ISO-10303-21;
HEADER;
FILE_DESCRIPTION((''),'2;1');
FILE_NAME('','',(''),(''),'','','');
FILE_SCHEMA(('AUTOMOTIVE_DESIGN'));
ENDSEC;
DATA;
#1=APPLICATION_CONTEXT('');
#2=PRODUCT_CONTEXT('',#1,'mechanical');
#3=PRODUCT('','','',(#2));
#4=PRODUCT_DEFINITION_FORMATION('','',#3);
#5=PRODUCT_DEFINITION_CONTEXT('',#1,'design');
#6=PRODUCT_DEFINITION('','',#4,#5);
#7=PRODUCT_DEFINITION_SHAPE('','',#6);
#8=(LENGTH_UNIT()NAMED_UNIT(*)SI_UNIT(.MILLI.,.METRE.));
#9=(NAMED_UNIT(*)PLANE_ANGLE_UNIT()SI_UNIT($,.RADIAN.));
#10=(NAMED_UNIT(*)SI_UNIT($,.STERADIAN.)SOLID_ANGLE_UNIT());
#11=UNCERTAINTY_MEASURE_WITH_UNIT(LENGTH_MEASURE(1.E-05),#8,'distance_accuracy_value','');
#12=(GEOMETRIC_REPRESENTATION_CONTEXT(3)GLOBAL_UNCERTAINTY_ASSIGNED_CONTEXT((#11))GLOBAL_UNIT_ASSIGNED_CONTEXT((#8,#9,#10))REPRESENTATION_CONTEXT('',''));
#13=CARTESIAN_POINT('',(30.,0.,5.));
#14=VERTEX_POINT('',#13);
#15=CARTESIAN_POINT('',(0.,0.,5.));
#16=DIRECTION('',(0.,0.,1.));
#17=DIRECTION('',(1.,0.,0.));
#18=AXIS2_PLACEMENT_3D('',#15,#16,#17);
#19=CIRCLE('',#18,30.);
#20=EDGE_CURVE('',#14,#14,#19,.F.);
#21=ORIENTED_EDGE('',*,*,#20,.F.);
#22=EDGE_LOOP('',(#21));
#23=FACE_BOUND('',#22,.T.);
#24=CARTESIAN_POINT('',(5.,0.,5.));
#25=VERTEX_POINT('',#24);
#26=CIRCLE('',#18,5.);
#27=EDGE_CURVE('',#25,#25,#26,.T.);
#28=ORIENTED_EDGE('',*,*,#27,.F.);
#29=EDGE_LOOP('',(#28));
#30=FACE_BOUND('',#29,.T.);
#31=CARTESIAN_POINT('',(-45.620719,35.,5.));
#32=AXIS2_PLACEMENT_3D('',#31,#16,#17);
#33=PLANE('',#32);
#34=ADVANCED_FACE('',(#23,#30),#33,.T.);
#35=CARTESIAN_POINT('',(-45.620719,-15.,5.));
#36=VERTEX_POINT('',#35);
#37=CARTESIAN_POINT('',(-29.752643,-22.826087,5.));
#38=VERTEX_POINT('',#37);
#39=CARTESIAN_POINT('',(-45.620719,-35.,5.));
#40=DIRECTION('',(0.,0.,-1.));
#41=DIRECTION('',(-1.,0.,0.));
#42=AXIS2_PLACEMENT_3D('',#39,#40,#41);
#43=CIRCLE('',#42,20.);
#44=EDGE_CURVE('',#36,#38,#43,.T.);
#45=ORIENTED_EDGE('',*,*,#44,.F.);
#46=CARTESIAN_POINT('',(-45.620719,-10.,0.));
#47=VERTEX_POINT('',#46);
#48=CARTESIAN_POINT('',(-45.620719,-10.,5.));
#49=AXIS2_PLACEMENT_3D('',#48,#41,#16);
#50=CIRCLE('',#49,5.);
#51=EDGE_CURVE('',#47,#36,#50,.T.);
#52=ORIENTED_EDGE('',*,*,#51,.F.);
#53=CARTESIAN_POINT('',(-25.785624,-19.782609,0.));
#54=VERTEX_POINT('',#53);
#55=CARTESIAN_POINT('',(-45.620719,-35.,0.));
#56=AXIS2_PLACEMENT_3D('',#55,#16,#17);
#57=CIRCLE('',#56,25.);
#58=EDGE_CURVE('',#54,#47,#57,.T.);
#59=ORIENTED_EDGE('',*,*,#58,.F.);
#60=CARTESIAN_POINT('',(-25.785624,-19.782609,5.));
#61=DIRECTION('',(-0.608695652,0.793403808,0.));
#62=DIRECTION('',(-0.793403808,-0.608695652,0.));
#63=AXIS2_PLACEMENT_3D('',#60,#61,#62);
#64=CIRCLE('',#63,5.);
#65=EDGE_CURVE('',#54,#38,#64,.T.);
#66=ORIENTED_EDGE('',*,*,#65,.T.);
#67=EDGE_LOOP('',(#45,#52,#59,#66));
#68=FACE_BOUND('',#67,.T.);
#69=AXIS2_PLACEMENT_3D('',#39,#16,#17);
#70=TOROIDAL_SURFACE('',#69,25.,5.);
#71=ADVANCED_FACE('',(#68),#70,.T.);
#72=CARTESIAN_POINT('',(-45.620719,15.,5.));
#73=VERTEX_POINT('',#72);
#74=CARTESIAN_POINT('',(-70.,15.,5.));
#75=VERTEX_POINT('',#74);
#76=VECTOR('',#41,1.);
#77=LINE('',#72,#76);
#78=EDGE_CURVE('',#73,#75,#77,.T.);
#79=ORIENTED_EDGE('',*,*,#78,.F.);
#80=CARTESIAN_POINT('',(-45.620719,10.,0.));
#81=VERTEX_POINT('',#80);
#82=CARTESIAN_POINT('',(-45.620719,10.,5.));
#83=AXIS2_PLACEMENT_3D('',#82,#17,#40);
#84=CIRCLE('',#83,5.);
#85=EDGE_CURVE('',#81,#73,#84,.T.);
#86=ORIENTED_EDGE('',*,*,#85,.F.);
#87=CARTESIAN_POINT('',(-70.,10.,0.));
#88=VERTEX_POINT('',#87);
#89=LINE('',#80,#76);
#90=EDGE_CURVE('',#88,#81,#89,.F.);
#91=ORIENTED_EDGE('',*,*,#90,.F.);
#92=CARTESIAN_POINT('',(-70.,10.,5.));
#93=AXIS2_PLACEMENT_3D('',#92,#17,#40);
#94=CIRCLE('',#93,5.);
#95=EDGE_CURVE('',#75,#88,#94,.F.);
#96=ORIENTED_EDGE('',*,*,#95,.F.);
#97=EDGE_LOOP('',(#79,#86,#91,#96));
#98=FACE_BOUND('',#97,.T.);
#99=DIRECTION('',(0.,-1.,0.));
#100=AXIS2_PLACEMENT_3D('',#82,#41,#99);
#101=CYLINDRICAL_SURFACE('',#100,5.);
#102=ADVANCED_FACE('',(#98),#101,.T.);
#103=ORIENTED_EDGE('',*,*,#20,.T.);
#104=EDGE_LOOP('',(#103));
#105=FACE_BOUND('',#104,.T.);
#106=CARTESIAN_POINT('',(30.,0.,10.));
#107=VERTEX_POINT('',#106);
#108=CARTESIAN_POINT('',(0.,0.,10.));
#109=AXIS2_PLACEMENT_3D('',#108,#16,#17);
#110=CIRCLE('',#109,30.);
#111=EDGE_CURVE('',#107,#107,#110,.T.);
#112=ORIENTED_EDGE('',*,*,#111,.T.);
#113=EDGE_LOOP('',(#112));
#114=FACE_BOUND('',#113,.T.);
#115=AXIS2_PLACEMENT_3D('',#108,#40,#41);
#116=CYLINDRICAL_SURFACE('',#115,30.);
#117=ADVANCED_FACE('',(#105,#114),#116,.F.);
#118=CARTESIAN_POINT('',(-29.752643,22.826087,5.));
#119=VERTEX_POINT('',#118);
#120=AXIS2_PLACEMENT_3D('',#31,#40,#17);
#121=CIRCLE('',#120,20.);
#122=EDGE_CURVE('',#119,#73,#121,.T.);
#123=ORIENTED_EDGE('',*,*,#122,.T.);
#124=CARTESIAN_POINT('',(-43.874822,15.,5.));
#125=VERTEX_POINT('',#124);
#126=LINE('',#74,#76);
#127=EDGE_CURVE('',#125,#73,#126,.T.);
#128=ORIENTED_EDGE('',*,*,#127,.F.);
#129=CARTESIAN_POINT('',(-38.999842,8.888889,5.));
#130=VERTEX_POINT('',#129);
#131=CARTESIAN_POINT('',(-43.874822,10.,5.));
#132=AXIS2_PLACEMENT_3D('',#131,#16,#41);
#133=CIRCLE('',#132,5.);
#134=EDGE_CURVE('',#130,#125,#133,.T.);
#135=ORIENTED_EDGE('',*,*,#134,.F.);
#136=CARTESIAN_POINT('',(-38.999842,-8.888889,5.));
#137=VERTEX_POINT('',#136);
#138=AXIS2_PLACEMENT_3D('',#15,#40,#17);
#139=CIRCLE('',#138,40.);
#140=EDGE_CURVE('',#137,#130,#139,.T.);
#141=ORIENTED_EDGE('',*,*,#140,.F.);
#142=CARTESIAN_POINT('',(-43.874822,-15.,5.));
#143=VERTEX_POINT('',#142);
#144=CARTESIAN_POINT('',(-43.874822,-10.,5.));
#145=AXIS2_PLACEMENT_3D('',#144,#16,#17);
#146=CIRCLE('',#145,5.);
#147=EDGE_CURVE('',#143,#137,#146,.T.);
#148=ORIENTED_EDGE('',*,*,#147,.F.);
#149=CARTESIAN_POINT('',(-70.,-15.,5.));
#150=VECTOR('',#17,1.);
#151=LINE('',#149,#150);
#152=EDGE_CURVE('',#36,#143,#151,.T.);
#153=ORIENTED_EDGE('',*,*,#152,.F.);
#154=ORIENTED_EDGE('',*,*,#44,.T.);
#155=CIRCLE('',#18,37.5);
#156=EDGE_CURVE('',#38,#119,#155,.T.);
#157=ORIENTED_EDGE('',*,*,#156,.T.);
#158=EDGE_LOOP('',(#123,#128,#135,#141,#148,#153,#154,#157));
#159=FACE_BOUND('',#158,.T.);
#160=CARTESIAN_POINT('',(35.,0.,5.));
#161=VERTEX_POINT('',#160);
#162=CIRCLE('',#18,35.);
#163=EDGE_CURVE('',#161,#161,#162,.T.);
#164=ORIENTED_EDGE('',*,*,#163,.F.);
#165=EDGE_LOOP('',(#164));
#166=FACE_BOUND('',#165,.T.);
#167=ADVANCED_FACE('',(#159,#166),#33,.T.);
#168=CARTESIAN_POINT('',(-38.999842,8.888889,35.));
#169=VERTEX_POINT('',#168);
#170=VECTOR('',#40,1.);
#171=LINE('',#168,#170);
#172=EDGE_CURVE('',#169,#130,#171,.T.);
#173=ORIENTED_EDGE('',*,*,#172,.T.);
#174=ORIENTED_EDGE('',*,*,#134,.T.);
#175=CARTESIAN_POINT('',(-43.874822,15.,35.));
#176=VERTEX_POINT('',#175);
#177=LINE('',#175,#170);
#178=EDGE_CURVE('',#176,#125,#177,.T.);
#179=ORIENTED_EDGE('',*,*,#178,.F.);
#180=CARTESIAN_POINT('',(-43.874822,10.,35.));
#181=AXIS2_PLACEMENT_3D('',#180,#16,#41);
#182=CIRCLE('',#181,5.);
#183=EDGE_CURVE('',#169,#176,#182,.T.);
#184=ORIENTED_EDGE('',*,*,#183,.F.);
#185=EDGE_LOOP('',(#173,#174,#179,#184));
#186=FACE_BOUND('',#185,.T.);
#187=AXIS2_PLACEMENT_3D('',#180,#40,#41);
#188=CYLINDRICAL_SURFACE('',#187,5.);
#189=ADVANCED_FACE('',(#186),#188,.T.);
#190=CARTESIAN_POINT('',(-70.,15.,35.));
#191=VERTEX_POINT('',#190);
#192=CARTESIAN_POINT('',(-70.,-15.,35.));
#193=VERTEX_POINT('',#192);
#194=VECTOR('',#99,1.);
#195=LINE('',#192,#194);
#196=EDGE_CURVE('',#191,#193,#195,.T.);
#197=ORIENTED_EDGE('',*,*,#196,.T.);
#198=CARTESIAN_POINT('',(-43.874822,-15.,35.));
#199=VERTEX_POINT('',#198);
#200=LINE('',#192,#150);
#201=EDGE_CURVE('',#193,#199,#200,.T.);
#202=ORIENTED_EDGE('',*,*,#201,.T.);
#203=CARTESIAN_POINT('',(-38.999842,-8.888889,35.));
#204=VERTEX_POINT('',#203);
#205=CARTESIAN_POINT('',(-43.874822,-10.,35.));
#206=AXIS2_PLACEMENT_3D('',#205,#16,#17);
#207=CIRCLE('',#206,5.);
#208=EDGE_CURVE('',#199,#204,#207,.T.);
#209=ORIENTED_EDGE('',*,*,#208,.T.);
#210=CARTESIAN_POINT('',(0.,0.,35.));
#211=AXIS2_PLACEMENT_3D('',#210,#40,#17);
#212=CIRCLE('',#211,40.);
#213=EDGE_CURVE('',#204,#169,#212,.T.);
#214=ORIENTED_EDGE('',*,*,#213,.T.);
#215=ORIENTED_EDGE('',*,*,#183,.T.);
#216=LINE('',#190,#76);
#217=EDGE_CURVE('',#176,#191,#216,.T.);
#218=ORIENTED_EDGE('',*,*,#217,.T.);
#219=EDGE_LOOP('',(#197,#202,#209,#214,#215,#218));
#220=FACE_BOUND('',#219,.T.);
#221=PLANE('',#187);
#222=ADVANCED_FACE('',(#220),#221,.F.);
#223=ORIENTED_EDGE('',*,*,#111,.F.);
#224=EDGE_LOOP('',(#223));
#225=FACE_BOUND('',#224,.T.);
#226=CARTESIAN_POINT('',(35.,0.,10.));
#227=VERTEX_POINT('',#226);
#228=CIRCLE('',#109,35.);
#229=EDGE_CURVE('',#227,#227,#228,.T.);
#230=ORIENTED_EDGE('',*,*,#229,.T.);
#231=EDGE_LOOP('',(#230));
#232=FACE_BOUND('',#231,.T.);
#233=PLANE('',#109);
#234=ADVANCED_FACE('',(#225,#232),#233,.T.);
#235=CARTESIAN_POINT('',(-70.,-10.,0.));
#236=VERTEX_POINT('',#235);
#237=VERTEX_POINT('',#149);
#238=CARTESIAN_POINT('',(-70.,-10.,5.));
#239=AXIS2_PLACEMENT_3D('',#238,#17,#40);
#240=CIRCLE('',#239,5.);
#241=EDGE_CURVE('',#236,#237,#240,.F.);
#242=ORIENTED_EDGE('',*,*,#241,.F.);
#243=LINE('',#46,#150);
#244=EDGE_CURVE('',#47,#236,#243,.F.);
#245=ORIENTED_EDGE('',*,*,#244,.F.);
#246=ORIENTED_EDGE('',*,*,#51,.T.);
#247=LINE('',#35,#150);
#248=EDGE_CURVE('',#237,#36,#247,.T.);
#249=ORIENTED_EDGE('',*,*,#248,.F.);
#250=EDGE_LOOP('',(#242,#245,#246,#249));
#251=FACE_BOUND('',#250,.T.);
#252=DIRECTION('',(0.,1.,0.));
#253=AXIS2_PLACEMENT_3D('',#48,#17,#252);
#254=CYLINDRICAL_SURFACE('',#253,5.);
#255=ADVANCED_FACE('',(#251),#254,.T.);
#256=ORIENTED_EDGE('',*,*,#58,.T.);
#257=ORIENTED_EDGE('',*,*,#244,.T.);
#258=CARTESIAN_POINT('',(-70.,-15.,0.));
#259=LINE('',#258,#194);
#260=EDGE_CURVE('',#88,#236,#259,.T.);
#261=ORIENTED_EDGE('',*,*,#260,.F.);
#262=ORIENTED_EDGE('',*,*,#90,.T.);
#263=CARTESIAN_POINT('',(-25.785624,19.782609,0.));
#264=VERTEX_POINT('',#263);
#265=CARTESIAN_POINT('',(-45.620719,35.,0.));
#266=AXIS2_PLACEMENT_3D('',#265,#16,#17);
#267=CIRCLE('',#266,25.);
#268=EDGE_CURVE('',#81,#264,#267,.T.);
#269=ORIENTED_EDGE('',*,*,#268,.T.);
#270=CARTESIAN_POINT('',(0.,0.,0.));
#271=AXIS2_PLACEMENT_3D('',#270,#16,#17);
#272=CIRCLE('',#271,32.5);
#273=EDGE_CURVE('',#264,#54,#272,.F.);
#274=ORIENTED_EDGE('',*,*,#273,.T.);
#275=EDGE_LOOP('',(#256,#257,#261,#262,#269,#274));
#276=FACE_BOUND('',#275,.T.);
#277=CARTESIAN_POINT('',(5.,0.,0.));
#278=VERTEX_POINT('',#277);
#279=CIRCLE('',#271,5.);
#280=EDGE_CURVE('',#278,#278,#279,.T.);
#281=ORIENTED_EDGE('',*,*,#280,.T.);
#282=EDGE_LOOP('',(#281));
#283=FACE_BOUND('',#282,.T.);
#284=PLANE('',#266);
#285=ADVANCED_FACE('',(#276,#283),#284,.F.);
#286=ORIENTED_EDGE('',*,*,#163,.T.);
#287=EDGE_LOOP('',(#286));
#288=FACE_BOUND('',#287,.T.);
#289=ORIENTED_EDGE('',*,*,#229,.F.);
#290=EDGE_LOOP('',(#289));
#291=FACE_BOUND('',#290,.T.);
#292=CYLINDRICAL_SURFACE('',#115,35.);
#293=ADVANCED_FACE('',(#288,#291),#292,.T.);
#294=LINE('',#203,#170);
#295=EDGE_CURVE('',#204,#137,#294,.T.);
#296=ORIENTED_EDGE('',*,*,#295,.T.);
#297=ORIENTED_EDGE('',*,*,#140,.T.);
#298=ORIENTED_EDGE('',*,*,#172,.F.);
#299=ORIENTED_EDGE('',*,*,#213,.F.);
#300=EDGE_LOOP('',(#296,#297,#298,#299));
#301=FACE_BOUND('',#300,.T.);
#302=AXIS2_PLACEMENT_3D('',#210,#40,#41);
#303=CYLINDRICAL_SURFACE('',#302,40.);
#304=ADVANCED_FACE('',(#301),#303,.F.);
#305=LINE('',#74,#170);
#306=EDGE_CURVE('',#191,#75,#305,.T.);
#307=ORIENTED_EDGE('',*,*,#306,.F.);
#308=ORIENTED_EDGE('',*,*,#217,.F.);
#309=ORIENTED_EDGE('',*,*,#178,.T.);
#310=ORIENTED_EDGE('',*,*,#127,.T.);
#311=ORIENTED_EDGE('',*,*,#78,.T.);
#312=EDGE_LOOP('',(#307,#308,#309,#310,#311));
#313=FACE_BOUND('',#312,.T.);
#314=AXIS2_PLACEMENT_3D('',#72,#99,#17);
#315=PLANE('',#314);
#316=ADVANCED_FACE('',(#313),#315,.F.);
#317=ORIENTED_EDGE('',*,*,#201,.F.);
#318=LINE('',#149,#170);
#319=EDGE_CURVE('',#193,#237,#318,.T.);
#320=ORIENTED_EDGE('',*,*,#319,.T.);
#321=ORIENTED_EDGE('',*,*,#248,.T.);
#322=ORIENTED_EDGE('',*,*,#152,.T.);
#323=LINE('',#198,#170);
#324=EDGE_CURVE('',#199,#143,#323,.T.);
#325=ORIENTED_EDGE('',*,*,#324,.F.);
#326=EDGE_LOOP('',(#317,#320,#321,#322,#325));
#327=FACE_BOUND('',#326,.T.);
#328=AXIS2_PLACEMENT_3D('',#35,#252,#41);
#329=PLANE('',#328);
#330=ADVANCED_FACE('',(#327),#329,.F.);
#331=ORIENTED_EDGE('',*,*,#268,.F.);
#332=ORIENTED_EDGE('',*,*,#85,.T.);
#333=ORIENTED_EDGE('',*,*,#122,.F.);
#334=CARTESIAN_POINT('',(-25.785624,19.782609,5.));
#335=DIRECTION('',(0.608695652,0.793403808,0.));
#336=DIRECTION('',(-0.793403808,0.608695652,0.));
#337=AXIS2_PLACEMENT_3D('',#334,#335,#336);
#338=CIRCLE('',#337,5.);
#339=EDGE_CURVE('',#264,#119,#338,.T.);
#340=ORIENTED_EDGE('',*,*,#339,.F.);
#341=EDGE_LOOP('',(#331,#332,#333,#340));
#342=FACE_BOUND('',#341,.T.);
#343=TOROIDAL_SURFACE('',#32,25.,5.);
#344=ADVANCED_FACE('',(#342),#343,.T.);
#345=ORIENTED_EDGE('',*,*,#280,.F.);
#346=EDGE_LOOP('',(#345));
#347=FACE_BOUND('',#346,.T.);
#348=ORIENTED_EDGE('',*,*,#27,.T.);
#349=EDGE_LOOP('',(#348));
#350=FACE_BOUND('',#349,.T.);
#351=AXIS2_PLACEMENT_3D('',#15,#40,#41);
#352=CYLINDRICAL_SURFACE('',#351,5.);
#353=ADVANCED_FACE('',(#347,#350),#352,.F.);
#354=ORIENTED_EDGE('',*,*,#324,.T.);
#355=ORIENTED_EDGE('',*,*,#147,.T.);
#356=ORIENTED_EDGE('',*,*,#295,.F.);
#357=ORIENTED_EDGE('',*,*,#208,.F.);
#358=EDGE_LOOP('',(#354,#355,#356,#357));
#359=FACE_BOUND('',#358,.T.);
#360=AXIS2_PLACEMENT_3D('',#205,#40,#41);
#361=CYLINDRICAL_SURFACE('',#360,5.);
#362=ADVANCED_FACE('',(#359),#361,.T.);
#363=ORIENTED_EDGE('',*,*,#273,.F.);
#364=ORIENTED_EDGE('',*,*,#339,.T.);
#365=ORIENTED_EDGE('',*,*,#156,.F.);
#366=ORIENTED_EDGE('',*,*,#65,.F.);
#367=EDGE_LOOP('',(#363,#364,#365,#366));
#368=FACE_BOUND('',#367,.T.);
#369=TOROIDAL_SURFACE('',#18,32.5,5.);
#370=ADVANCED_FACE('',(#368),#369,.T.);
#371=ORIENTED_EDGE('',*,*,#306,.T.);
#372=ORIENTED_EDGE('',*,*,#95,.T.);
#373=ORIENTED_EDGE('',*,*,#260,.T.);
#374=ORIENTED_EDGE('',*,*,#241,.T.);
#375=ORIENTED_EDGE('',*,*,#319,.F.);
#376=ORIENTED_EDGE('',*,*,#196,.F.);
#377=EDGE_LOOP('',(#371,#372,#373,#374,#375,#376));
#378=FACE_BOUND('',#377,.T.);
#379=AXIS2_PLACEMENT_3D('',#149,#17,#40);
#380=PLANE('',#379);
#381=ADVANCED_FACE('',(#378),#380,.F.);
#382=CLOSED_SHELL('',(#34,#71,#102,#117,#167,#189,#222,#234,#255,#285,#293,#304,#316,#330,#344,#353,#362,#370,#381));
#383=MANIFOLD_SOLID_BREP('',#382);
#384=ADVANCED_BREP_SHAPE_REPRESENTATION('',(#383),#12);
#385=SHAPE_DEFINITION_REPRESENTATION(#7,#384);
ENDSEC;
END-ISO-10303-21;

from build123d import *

# Parameters (mm, degrees)
ESQUISSE1_R        = 5
BOSS_EXTRU_1_DEPTH = 5
ESQUISSE6_R        = 35
ESQUISSE6_R_2      = 30
BOSS_EXTRU_6_DEPTH = 5
BOSS_EXTRU_9_DEPTH = 30
CONG_3_R           = 5


with BuildPart() as part:
    # Esquisse1 → Boss.-Extru.1 (new body)
    with BuildSketch(Plane.XY):
        with BuildLine():
            Line((-45.620718977, 15), (-70, 15))
            Line((-70, 15), (-70, -15))
            Line((-70, -15), (-45.620718977, -15))
            ThreePointArc((-45.620718977, -15), (-36.774201608, -17.062911874), (-29.752642811, -22.826086957))
            ThreePointArc((-29.752642811, -22.826086957), (37.5, 0), (-29.752642811, 22.826086957))
            ThreePointArc((-29.752642811, 22.826086957), (-36.774201608, 17.062911874), (-45.620718977, 15))
        make_face()
        Circle(ESQUISSE1_R, mode=Mode.SUBTRACT)
    extrude(amount=BOSS_EXTRU_1_DEPTH)

    # Esquisse6 → Boss.-Extru.6 (add)
    with BuildSketch(Plane.XY.offset(5)):
        Circle(ESQUISSE6_R)
        Circle(ESQUISSE6_R_2, mode=Mode.SUBTRACT)
    extrude(amount=BOSS_EXTRU_6_DEPTH)

    # Esquisse8 → Boss.-Extru.9 (add)
    with BuildSketch(Plane.XY.offset(5)):
        with BuildLine():
            Line((-70, -15), (-70, 15))
            Line((-70, 15), (-43.874821937, 15))
            ThreePointArc((-43.874821937, 15), (-39.966142137, 13.118047822), (-38.999841722, 8.888888889))
            ThreePointArc((-38.999841722, 8.888888889), (-40, 0), (-38.999841722, -8.888888889))
            ThreePointArc((-38.999841722, -8.888888889), (-39.966142137, -13.118047822), (-43.874821937, -15))
            Line((-43.874821937, -15), (-70, -15))
        make_face()
    extrude(amount=BOSS_EXTRU_9_DEPTH)

    # Congé3
    cong_3_edges = [part.edges().sort_by_distance(p)[0] for p in [
        (37.5, 0, 0),
        (-57.810359489, 15, 0),
        (-57.810359489, -15, 0),
        (-36.774201608, -17.062911874, 0),
        (-36.774201608, 17.062911874, 0),
    ]]
    fillet(cong_3_edges, radius=CONG_3_R - 0.0001)  # a hair under: the kernel refuses the full size


solid = part.part
